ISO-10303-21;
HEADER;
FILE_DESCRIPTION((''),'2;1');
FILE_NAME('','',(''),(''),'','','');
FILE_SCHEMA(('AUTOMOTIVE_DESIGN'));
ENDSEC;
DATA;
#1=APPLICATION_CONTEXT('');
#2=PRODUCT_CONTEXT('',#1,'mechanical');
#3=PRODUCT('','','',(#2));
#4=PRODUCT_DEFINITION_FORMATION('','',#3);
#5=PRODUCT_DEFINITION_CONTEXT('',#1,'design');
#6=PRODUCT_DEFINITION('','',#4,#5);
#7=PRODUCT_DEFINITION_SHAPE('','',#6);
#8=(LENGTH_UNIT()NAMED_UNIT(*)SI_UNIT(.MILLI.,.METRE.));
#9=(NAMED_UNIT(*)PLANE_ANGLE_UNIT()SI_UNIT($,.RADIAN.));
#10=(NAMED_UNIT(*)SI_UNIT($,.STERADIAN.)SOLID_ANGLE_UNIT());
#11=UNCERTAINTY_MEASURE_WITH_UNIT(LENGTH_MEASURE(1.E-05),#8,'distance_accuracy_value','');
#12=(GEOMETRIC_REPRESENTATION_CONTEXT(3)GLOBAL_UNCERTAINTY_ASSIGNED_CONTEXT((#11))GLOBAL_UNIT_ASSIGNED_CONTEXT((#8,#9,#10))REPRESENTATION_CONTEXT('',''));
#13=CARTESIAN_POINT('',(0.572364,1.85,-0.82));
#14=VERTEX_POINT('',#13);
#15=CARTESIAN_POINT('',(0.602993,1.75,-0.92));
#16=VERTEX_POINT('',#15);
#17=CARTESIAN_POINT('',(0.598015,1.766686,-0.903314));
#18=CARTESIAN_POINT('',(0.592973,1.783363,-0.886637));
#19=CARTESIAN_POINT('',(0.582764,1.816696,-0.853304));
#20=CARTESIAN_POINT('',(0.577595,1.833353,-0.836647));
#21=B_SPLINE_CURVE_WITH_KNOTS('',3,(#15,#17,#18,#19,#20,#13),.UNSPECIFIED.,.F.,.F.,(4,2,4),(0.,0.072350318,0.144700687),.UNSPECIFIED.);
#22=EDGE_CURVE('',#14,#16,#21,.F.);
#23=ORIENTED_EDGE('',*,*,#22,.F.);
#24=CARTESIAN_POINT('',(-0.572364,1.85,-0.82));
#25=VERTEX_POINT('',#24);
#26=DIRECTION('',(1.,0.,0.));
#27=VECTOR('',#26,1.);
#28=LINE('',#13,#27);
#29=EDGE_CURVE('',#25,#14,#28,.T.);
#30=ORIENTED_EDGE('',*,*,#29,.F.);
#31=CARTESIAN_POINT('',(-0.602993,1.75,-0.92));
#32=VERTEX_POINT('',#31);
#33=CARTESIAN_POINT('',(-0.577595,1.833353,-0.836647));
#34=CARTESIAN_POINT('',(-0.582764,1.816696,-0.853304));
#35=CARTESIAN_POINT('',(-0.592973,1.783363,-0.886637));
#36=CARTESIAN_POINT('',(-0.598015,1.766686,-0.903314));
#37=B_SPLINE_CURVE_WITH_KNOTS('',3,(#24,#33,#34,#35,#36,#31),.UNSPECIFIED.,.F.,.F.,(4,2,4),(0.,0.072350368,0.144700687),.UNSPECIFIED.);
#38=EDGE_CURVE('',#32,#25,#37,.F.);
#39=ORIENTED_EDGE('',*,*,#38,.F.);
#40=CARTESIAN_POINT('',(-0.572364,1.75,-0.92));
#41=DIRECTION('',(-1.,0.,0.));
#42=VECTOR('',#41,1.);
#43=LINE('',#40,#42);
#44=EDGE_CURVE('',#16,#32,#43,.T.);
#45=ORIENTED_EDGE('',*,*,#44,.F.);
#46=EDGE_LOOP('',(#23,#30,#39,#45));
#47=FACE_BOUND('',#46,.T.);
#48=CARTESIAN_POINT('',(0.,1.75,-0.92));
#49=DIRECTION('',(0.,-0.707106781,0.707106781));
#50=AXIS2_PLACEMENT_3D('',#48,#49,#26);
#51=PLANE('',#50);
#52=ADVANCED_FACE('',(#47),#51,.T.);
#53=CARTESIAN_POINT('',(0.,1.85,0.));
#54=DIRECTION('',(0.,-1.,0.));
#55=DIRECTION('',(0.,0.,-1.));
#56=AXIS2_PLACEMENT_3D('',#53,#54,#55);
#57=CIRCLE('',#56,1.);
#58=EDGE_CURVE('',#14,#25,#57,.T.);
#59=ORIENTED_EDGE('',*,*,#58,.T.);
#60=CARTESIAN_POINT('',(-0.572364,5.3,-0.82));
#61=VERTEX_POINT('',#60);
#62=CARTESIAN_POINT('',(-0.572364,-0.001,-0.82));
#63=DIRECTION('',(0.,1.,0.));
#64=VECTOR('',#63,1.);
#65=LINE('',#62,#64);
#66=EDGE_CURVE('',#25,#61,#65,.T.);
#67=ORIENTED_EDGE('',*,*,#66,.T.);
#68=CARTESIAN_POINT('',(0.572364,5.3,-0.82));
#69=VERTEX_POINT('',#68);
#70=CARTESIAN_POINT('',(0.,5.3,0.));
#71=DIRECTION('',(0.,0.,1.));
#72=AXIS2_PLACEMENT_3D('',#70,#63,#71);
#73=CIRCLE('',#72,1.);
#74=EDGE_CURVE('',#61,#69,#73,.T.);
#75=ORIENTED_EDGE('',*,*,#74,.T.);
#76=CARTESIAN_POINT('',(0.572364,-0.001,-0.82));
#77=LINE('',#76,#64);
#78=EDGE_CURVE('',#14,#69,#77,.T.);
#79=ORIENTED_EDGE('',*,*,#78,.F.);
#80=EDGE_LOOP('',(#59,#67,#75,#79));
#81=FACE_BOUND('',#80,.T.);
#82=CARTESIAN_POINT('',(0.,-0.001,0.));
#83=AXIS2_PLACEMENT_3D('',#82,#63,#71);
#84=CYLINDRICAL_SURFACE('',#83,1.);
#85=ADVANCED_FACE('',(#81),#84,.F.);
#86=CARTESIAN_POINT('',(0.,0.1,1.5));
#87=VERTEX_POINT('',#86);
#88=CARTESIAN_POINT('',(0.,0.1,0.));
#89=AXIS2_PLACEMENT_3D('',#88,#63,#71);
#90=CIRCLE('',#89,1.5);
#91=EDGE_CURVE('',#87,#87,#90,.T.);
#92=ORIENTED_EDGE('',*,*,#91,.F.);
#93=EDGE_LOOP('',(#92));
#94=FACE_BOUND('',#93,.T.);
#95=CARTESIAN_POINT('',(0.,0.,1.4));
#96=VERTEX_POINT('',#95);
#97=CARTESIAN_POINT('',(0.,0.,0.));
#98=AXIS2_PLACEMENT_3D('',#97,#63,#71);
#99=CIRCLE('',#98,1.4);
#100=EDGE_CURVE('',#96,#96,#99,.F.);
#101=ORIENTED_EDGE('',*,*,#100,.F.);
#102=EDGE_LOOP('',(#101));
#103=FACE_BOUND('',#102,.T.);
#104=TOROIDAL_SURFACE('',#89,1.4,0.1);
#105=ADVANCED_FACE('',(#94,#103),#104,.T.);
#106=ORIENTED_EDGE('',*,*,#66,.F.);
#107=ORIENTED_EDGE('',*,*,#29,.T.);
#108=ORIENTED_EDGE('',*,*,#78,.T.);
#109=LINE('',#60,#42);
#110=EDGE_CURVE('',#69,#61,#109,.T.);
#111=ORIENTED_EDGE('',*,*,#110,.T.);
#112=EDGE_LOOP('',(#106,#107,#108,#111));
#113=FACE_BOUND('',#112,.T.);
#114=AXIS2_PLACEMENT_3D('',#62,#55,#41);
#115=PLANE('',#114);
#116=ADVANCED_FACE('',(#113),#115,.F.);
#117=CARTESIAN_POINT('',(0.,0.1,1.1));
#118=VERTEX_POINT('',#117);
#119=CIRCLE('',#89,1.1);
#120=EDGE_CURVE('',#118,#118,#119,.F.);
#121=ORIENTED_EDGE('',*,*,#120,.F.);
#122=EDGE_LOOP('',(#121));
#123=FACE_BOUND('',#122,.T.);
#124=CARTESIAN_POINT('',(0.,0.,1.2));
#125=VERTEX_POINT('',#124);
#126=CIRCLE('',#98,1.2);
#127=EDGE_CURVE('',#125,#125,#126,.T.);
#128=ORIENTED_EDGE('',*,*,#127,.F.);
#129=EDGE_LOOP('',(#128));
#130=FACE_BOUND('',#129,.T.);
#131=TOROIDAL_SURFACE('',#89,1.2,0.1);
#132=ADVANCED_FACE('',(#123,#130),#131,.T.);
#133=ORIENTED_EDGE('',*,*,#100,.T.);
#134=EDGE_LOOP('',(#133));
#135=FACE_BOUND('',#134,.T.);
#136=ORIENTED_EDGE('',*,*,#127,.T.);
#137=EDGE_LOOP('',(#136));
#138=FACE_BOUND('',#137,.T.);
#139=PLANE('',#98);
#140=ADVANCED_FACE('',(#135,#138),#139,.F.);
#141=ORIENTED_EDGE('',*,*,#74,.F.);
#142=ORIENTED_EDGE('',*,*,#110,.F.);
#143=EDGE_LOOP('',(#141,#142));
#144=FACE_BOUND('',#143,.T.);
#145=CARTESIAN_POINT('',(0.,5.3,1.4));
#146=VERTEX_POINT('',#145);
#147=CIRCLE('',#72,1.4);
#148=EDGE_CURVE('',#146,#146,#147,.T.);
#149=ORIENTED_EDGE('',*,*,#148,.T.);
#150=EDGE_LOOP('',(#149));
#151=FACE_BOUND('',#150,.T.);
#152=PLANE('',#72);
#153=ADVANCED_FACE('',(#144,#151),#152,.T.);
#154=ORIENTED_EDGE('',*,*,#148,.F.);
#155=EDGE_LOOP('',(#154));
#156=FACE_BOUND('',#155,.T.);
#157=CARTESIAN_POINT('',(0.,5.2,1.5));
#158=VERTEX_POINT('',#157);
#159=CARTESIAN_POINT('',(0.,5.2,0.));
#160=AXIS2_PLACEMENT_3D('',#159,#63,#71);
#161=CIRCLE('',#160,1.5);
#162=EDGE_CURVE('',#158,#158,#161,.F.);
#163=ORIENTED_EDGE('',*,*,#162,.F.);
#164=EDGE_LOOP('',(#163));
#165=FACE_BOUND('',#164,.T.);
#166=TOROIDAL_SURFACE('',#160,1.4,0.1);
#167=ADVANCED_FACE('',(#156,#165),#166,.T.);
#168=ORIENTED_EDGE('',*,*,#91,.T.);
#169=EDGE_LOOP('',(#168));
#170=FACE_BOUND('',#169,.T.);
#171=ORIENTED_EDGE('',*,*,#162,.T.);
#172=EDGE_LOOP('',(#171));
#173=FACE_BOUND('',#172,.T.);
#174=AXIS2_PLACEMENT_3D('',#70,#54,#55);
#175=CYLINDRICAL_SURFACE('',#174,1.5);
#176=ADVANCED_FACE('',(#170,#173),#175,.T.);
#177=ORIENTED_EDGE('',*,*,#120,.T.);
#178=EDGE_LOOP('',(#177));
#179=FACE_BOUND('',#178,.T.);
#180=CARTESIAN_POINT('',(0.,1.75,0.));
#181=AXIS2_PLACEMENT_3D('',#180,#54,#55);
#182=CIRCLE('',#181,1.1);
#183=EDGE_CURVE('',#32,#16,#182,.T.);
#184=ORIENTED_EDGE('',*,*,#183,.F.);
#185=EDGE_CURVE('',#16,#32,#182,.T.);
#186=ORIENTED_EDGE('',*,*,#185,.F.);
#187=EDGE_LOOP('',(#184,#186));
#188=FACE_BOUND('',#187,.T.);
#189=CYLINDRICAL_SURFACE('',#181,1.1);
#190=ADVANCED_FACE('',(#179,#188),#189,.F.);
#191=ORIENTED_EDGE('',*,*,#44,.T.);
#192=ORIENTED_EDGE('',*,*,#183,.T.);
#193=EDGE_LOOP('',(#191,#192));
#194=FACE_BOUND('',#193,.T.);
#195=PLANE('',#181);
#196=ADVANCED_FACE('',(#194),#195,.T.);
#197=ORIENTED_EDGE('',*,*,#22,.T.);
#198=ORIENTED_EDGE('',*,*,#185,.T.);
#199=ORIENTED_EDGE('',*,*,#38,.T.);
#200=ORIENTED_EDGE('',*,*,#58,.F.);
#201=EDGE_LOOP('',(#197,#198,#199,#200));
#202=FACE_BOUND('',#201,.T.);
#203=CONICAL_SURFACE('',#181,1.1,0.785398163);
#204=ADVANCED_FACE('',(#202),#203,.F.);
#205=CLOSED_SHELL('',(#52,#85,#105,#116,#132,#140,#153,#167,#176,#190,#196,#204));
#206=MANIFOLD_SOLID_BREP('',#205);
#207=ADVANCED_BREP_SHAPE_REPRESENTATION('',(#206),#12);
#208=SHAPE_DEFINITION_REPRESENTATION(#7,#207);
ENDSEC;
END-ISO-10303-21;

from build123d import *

# Parameters (mm, degrees)
SKETCH_1_R          = 1.5
EXTRUDE_1_DEPTH     = 5.3
CUT_EXTRUDE_1_REACH = 7.709
SKETCH_3_R          = 1.1
CUT_EXTRUDE_2_DEPTH = 1.75
FILLET_1_R          = 0.1
CHAMFER_1_SIZE      = 0.1


with BuildPart() as part:
    # 草图1 → 凸台-拉伸1 (new body)
    with BuildSketch(Plane(origin=(0, 0, 0), x_dir=(1, 0, 0), z_dir=(0, 1, 0))):
        with Locations(Location((0, 0, 0), (0, 0, 270))):
            Circle(SKETCH_1_R)
    extrude(amount=EXTRUDE_1_DEPTH)

    # 草图2 → 切除-拉伸1 (cut, up to next)
    with BuildSketch(Plane(origin=(0, 5.3, 0), x_dir=(1, 0, 0), z_dir=(0, 1, 0)), mode=Mode.PRIVATE) as cut_extrude_1_sk1:
        with BuildLine():
            Line((-0.572363521, 0.82), (0.572363521, 0.82))
            ThreePointArc((0.572363521, 0.82), (0, -1), (-0.572363521, 0.82))
        make_face()
    cut_extrude_1_tool1 = extrude(cut_extrude_1_sk1.sketch, amount=-CUT_EXTRUDE_1_REACH, mode=Mode.PRIVATE) & part.part
    add(cut_extrude_1_tool1.solids().sort_by_distance((0, 5.3, 0.041647))[0], mode=Mode.SUBTRACT)

    # 草图3 → 切除-拉伸2 (cut)
    with BuildSketch(Plane(origin=(0, 0, 0), x_dir=(-1, 0, 0), z_dir=(0, -1, 0))):
        with Locations(Location((0, 0, 0), (0, 0, 90))):
            Circle(SKETCH_3_R)
    extrude(amount=-CUT_EXTRUDE_2_DEPTH, mode=Mode.SUBTRACT)

    # 圆角1
    fillet_1_edges = [part.edges().sort_by_distance(p)[0] for p in [
        (0, 0, 1.1),
        (0, 0, -1.5),
        (0, 5.3, -1.5),
    ]]
    fillet(fillet_1_edges, radius=FILLET_1_R)

    # 倒角1
    chamfer_1_edges = [part.edges().sort_by_distance(p)[0] for p in [
        (0, 1.75, -0.82),
        (0, 1.75, 1),
    ]]
    chamfer(chamfer_1_edges, length=CHAMFER_1_SIZE - 0.0001)  # a hair under: the kernel refuses the full size


solid = part.part
